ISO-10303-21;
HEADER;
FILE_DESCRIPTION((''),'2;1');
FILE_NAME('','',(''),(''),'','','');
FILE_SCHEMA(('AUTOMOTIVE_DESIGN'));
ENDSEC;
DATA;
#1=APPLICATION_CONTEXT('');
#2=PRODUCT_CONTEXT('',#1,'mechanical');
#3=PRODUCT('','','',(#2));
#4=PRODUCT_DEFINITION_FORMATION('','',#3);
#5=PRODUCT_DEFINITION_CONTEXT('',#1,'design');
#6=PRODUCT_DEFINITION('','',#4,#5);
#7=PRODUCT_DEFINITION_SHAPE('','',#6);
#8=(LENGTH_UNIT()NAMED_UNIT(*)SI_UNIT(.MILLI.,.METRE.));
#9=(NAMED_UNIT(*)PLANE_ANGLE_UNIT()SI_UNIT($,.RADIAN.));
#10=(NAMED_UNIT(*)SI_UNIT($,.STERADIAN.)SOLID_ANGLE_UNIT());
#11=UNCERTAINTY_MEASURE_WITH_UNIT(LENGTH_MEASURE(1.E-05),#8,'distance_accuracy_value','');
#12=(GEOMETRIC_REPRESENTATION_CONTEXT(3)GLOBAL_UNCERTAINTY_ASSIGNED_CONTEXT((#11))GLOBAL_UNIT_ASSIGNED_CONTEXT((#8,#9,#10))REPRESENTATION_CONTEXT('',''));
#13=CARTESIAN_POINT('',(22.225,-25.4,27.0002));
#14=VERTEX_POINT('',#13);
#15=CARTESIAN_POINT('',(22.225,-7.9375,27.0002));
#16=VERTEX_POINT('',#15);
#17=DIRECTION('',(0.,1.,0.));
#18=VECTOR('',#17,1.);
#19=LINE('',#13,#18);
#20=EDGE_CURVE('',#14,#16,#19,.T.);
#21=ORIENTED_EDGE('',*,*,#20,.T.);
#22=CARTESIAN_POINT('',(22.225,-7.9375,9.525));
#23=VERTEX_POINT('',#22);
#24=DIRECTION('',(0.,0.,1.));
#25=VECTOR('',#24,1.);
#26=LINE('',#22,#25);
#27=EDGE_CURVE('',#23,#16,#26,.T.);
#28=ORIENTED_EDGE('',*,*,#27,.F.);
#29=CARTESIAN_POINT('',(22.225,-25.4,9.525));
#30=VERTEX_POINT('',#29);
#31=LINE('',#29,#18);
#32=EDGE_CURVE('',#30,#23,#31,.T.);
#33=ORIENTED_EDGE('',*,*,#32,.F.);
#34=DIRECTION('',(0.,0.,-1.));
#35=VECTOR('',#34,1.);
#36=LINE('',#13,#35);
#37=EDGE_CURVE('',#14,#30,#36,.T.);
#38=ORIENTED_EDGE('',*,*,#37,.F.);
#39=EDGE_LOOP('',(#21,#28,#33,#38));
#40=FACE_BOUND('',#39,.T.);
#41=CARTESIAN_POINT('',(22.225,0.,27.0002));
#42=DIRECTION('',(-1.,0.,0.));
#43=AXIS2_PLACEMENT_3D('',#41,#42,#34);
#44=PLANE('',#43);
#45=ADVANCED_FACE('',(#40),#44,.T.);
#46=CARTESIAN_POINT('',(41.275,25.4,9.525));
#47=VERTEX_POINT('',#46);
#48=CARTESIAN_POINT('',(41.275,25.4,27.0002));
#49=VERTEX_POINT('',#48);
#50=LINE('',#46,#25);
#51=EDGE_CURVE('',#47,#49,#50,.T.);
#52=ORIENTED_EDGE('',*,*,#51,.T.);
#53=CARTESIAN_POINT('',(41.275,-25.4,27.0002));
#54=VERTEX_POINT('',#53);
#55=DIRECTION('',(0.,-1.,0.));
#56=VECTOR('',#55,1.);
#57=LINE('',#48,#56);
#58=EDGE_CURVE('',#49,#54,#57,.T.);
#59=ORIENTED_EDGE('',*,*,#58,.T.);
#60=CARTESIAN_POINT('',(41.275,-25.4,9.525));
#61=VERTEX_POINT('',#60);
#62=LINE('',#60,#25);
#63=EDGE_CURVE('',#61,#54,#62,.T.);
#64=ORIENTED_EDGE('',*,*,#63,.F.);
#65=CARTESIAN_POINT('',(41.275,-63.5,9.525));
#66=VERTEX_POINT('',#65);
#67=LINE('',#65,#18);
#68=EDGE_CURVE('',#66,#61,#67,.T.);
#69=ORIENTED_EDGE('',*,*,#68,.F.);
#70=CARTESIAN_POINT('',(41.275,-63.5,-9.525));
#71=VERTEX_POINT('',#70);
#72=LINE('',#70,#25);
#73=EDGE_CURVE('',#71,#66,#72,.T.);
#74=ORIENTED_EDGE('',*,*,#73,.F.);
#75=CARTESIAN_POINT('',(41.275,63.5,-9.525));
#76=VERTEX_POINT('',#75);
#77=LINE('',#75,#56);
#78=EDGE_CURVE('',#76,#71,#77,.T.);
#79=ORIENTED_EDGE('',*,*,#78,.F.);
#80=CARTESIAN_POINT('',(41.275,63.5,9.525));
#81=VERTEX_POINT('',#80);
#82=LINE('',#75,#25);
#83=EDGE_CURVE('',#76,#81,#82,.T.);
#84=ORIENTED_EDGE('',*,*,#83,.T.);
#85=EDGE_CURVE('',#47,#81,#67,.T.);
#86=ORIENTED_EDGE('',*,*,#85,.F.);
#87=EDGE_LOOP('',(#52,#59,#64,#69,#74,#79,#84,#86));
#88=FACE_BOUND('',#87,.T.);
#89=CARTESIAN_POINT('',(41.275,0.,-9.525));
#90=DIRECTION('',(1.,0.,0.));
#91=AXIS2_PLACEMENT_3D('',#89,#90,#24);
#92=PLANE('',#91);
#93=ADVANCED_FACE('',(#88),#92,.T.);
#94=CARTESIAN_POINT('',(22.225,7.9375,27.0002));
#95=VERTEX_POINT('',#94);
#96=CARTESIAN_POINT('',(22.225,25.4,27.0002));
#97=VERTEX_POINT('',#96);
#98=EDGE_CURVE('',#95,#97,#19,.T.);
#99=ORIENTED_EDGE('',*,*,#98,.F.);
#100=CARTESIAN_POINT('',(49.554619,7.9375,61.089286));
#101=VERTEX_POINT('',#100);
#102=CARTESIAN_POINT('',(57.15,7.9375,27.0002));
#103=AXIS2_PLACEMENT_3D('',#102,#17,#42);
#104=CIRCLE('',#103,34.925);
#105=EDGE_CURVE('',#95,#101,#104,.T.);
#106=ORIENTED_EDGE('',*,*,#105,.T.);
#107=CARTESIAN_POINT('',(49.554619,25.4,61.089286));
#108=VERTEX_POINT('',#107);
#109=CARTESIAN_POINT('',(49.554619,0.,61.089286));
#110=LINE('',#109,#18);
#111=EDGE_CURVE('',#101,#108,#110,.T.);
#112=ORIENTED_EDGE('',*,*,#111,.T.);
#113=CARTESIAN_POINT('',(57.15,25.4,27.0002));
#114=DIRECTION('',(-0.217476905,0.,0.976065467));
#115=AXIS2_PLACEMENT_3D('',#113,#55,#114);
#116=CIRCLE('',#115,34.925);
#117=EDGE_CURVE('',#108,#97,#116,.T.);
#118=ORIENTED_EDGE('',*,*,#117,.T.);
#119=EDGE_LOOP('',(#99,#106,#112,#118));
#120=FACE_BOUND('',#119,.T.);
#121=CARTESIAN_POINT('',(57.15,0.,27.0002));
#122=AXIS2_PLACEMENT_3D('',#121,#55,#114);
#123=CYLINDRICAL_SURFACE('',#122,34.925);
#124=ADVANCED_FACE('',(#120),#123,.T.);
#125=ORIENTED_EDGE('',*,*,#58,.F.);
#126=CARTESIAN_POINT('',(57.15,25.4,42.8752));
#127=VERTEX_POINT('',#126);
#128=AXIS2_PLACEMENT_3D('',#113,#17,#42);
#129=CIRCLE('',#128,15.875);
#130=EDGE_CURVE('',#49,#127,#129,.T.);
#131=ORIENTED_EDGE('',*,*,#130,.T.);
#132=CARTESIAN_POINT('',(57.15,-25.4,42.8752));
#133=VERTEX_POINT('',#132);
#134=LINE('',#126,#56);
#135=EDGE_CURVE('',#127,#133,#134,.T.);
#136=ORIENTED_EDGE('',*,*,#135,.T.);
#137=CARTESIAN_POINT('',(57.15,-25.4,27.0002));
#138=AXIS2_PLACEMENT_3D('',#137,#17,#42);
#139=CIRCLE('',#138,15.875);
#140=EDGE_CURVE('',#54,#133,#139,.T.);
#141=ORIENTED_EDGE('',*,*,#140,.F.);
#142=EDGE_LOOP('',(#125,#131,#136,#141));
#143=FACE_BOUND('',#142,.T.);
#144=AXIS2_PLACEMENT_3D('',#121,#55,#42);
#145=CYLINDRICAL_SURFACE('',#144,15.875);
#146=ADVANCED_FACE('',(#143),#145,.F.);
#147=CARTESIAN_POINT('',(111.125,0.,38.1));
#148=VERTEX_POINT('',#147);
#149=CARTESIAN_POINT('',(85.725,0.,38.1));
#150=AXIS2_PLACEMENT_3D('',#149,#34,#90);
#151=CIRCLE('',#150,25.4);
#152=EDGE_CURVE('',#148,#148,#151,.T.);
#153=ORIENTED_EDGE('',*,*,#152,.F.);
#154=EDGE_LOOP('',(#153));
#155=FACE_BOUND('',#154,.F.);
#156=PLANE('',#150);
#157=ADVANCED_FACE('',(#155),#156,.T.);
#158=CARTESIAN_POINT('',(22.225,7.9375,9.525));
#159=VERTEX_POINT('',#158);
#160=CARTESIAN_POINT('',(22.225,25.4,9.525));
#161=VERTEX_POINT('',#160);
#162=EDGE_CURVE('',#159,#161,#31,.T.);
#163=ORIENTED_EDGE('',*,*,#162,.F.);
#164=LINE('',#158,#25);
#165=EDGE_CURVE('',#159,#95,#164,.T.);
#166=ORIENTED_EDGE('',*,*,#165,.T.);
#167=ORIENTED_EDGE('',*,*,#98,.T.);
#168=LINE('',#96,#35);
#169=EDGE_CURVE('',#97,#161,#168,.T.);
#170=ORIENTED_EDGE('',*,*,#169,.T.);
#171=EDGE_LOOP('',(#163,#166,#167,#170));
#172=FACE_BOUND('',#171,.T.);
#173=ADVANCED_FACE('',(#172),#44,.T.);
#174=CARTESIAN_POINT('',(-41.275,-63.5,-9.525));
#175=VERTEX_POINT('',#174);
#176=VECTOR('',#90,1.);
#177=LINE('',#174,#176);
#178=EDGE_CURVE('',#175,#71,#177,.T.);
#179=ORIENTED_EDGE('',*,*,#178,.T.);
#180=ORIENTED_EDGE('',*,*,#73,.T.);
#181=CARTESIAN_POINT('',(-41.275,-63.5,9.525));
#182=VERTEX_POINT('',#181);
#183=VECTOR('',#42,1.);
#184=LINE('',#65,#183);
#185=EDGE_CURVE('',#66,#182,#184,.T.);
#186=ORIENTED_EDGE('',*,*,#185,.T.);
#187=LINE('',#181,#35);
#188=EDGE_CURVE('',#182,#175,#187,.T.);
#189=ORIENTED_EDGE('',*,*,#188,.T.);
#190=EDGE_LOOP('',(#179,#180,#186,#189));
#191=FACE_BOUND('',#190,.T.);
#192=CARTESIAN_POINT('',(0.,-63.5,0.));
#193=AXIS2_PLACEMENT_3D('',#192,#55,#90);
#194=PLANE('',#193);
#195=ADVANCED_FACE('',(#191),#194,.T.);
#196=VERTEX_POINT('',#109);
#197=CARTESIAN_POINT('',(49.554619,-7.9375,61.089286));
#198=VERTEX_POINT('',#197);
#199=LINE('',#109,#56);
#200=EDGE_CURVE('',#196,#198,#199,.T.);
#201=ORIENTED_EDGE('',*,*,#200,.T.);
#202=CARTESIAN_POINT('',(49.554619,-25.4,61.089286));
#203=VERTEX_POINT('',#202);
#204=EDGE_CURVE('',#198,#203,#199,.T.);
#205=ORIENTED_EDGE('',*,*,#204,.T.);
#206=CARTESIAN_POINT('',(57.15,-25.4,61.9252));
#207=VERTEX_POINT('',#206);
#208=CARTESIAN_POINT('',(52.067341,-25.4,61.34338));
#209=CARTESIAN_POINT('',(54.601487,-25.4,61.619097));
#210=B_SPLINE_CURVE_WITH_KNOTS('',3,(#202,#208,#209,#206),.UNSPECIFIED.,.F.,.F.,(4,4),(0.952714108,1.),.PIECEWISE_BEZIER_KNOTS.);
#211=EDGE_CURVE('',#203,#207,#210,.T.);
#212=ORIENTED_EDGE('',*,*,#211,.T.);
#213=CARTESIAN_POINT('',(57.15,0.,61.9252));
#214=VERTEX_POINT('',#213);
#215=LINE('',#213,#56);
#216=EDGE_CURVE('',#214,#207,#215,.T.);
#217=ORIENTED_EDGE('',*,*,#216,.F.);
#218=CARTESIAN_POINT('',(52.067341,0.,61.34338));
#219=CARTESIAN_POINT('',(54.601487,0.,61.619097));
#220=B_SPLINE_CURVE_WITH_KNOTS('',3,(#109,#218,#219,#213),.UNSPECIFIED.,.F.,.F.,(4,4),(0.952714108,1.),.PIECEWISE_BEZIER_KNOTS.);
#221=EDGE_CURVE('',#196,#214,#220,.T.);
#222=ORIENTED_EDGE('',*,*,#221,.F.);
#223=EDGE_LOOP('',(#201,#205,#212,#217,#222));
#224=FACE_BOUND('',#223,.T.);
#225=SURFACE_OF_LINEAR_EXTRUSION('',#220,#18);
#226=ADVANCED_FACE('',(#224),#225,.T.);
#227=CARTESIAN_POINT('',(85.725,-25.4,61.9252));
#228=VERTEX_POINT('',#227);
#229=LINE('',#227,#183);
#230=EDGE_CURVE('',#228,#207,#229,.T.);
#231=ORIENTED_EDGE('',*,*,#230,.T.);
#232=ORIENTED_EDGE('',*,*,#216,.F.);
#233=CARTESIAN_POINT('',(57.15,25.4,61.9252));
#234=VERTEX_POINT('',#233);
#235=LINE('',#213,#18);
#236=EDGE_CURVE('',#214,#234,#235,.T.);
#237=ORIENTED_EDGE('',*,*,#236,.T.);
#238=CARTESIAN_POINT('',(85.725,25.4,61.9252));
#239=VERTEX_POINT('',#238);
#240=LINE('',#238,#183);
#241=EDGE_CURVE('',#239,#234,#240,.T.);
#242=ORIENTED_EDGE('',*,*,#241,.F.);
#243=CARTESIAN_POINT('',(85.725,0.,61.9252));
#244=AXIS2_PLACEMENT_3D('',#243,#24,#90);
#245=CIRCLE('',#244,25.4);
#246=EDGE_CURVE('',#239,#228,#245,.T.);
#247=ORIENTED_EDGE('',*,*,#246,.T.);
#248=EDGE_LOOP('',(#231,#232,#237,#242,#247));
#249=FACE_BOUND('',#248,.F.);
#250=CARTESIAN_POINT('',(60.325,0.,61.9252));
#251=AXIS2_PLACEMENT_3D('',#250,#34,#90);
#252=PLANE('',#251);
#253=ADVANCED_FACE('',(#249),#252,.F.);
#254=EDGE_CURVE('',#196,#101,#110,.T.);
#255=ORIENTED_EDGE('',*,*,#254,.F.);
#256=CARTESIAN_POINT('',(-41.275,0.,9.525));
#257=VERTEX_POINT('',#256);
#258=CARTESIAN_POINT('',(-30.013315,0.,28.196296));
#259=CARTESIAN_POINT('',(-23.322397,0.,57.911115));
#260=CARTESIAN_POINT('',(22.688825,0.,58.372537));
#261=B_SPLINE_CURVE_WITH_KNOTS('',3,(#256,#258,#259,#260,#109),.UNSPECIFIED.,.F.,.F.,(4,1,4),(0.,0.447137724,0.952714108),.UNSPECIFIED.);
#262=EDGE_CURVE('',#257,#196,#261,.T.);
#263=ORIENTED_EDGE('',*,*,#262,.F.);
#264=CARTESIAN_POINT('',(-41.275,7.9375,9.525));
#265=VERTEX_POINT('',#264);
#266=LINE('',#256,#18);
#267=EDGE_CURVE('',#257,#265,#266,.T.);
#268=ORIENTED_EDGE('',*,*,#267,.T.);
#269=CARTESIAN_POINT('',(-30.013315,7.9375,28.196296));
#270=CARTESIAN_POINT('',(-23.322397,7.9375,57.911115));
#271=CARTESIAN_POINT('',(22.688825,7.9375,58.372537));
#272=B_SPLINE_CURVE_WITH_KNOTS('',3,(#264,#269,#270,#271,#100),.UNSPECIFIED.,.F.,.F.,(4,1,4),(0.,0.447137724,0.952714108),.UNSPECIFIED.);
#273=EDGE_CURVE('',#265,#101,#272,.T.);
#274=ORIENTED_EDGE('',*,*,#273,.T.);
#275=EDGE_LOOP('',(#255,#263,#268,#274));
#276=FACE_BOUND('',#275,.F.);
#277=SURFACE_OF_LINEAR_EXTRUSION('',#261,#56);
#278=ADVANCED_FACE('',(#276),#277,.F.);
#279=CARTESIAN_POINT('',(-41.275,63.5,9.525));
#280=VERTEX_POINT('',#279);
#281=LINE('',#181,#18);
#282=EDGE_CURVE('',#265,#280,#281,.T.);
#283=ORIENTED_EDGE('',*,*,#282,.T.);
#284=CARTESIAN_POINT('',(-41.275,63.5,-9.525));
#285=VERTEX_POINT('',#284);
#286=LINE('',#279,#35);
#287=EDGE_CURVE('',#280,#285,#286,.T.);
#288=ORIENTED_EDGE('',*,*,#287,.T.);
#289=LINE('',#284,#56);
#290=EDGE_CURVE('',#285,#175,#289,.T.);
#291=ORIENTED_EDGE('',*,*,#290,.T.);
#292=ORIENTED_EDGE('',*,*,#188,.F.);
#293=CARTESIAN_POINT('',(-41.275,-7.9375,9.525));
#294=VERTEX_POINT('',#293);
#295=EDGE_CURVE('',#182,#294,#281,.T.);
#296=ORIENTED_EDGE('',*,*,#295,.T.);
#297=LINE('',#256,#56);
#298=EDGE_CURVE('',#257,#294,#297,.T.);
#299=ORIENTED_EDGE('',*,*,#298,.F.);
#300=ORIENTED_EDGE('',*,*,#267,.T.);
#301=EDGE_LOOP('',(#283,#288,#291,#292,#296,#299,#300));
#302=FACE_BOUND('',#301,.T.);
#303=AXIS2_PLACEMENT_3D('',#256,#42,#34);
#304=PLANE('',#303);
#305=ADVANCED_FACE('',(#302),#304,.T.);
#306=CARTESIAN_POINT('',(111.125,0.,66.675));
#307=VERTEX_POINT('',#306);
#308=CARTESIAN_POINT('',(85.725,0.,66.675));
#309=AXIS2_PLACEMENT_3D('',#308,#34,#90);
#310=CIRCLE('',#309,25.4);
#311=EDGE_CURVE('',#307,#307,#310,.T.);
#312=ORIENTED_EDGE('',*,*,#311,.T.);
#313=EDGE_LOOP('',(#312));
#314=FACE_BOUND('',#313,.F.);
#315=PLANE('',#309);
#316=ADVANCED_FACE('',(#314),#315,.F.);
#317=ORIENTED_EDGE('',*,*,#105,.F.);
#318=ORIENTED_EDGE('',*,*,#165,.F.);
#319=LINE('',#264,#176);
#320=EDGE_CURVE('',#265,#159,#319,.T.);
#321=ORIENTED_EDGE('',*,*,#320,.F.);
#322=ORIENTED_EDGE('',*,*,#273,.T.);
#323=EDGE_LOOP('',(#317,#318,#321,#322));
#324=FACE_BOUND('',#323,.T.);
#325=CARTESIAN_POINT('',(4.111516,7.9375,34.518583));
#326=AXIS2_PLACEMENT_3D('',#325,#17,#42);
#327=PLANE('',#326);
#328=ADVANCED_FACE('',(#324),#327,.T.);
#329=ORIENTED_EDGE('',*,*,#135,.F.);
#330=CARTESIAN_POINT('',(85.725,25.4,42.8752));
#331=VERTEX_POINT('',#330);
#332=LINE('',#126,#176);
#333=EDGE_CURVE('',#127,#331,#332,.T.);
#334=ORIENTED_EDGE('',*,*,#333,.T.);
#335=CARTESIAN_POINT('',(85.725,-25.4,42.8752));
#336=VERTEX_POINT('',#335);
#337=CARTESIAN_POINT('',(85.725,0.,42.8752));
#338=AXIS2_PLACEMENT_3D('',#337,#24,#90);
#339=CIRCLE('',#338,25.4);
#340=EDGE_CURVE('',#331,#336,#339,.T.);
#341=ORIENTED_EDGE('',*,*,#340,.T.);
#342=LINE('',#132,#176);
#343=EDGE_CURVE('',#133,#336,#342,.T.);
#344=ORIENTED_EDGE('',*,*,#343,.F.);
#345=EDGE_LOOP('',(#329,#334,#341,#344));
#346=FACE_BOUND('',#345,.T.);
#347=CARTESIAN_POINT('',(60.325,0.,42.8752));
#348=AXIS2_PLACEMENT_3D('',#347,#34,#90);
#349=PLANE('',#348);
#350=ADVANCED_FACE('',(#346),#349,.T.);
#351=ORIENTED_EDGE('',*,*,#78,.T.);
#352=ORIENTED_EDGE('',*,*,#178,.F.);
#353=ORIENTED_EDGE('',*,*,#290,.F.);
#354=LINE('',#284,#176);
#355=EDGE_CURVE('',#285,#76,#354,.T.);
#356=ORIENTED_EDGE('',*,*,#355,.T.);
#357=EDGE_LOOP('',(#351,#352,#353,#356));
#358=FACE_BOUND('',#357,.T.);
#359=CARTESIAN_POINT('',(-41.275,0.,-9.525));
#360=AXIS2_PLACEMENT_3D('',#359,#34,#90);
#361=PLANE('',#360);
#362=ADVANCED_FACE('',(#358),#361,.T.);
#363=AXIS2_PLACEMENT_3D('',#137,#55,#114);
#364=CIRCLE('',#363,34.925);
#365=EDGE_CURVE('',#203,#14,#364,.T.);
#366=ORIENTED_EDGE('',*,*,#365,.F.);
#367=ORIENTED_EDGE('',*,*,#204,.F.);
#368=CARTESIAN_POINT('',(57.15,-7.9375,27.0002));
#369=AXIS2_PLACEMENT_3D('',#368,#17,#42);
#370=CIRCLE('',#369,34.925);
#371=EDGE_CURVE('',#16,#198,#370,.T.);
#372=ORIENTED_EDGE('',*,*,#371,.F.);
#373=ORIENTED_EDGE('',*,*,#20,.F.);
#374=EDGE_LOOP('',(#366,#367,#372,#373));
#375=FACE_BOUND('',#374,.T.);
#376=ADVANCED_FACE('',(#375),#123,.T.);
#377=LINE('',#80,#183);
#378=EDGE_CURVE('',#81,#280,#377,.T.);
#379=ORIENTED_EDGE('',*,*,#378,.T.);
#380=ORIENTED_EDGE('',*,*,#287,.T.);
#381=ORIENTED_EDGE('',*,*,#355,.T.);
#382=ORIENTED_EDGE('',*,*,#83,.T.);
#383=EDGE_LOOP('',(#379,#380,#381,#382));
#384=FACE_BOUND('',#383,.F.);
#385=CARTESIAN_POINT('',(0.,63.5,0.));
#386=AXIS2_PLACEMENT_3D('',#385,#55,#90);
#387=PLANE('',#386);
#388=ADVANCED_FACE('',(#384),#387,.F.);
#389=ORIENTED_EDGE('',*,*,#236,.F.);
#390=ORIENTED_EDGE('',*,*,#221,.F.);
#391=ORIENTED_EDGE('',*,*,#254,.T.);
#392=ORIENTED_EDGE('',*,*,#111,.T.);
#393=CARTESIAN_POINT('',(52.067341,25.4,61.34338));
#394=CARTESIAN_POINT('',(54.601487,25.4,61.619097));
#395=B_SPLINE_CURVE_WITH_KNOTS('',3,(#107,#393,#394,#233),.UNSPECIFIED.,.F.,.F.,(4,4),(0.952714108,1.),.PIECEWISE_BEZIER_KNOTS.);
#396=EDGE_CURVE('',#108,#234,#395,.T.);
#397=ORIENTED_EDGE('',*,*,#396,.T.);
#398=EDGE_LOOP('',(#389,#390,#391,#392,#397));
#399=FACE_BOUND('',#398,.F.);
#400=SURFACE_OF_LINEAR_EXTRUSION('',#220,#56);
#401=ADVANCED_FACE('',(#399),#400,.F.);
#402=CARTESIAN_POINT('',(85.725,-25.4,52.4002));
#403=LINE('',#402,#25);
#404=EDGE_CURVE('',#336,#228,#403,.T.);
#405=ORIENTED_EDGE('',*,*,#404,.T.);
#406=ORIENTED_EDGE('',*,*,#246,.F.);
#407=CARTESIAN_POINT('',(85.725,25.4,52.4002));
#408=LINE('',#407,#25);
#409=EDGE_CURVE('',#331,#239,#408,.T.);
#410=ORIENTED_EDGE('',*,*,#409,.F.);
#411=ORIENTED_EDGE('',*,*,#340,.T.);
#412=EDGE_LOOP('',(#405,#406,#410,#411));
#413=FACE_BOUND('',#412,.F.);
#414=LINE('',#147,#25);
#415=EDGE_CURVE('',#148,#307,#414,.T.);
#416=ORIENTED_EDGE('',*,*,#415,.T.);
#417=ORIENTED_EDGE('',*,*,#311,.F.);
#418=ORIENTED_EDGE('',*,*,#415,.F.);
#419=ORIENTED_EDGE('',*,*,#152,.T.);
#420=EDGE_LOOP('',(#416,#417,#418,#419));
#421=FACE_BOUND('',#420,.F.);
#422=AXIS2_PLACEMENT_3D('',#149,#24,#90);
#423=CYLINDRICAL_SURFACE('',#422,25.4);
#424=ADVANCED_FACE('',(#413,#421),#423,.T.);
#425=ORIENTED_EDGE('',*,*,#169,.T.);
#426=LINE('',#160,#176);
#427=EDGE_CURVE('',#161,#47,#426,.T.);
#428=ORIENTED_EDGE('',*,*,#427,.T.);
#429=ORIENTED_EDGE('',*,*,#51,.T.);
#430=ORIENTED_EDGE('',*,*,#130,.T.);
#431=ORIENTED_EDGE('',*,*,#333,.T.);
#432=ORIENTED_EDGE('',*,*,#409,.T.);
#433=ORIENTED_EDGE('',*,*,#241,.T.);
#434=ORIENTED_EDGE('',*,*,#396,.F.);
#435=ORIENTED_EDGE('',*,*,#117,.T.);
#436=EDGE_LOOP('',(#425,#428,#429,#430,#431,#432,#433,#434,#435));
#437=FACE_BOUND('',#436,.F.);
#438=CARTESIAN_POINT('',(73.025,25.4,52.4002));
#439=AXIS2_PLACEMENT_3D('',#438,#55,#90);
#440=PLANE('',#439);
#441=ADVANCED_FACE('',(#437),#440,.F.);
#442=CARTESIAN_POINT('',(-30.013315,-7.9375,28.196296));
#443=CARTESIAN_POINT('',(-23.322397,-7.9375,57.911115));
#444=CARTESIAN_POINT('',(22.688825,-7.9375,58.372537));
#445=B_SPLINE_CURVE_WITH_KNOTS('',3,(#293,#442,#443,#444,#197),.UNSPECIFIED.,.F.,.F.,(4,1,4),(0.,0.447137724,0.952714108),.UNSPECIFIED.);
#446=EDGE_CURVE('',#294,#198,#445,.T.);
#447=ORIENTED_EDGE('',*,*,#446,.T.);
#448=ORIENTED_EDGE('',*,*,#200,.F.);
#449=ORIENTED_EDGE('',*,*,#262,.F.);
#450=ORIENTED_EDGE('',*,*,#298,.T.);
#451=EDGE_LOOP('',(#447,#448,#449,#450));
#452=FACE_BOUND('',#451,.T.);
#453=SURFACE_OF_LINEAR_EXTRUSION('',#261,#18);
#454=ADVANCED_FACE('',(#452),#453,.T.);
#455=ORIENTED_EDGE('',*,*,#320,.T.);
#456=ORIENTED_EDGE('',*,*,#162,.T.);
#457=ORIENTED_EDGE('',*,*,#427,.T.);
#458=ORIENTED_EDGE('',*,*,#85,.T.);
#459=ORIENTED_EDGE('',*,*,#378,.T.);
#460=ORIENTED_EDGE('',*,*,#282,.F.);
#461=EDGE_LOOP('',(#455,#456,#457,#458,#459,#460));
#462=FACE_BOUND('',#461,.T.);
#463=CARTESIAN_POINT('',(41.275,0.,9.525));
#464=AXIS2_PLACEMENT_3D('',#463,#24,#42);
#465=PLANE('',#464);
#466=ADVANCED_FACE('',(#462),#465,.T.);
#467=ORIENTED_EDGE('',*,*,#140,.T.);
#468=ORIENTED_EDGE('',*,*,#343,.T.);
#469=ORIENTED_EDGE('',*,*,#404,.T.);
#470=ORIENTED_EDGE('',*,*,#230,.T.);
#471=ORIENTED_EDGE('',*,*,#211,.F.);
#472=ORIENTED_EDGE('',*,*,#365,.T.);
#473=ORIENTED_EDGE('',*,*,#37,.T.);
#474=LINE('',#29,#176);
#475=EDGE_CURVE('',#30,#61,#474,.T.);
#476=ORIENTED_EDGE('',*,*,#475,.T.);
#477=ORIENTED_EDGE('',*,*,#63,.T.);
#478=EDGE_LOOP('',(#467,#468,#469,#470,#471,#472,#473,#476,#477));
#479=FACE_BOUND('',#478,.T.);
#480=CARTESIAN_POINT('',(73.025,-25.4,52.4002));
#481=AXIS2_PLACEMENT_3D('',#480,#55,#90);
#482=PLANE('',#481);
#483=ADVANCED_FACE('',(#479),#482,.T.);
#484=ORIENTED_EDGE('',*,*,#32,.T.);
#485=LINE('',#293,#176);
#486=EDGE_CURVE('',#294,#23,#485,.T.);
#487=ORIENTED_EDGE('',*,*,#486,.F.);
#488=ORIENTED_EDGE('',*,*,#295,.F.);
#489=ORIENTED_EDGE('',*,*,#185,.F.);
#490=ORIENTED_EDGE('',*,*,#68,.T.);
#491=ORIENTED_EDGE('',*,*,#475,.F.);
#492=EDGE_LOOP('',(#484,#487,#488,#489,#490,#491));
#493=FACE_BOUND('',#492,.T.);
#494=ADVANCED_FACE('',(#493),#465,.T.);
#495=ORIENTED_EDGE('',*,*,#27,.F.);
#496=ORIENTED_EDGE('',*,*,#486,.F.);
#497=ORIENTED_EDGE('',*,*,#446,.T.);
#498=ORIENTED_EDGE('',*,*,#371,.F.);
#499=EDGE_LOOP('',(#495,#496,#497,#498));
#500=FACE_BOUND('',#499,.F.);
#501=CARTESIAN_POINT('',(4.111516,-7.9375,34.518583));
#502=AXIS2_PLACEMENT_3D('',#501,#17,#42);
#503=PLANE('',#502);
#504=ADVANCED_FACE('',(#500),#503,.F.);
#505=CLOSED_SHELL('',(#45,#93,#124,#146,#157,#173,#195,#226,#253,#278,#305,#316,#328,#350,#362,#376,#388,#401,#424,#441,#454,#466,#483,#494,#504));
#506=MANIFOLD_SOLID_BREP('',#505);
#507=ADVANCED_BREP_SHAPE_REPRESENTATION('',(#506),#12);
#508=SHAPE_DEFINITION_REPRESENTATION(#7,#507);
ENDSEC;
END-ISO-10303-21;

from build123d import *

# Parameters (mm, degrees)
F1_DEPTH = 63.5
F2_DEPTH = 25.4
F3_DEPTH = 7.9375
F0_W     = 25.4
F0_H     = 19.05
F4_DEPTH = 25.4


# Not quite as in the source:
# - a feature names something its author has since deleted; it is built from what else it names


with BuildPart() as f1:
    # F0 (on Front) → F1 (new body, symmetric)
    with BuildSketch(Plane.XZ):
        Polygon((-41.275, 9.525), (-41.275, -9.525), (41.275, -9.525), (41.275, 9.525), (22.225, 9.525), align=None)
    extrude(amount=F1_DEPTH, both=True)

    # F0 (on Front) → F2 (join, symmetric)
    with BuildSketch(Plane.XZ):
        with BuildLine():
            Line((22.225, 9.525), (41.275, 9.525))
            Line((41.275, 9.525), (41.275, 27.0002))
            ThreePointArc((41.275, 27.0002), (45.9246798487, 38.2255201513), (57.15, 42.8752))
            Line((57.15, 42.8752), (60.325, 42.8752))
            Line((60.325, 42.8752), (60.325, 61.9252))
            Line((60.325, 61.9252), (57.15, 61.9252))
            add(Edge.make_bspline(
                [(49.5546191044, 61.0892864361), (52.0673413898, 61.343380394), (54.6014869269, 61.6190974593), (57.15, 61.9252)],
                knots=[0.9527141081, 0.9527141081, 0.9527141081, 0.9527141081, 1, 1, 1, 1], degree=3))
            ThreePointArc((49.5546191044, 61.0892864361), (29.9009238434, 48.8461029022), (22.225, 27.0002))
            Line((22.225, 27.0002), (22.225, 9.525))
        make_face()
    extrude(amount=F2_DEPTH, both=True)

    # F0 (on Front) → F3 (join, symmetric)
    with BuildSketch(Plane.XZ):
        with BuildLine():
            add(Edge.make_bspline(
                [(-41.275, 9.525), (-30.0133153796, 28.1962957233), (-23.3223965861, 57.9111150093), (22.6888247137, 58.3725373278), (49.5546191044, 61.0892864361)],
                knots=[0, 0, 0, 0, 0.4471377236, 0.9527141081, 0.9527141081, 0.9527141081, 0.9527141081], degree=3))
            Line((-41.275, 9.525), (22.225, 9.525))
            Line((22.225, 9.525), (22.225, 27.0002))
            ThreePointArc((22.225, 27.0002), (29.9009238434, 48.8461029022), (49.5546191044, 61.0892864361))
        make_face()
    extrude(amount=F3_DEPTH, both=True)

    # F0 (on Front) → F4 (join, symmetric)
    with BuildSketch(Plane.XZ):
        with Locations((73.025, 52.4002)):
            Rectangle(F0_W, F0_H)
    extrude(amount=F4_DEPTH, both=True)

    # F0 (on Front) → F5 (revolve)
    with BuildSketch(Plane.XZ):
        Polygon((85.725, 66.675), (85.725, 61.9252), (85.725, 42.8752), (85.725, 38.1), (111.125, 38.1), (111.125, 66.675), align=None)
    revolve(axis=Axis((85.725, 0, 52.3875), (0, 0, -1)))


solid = f1.part
